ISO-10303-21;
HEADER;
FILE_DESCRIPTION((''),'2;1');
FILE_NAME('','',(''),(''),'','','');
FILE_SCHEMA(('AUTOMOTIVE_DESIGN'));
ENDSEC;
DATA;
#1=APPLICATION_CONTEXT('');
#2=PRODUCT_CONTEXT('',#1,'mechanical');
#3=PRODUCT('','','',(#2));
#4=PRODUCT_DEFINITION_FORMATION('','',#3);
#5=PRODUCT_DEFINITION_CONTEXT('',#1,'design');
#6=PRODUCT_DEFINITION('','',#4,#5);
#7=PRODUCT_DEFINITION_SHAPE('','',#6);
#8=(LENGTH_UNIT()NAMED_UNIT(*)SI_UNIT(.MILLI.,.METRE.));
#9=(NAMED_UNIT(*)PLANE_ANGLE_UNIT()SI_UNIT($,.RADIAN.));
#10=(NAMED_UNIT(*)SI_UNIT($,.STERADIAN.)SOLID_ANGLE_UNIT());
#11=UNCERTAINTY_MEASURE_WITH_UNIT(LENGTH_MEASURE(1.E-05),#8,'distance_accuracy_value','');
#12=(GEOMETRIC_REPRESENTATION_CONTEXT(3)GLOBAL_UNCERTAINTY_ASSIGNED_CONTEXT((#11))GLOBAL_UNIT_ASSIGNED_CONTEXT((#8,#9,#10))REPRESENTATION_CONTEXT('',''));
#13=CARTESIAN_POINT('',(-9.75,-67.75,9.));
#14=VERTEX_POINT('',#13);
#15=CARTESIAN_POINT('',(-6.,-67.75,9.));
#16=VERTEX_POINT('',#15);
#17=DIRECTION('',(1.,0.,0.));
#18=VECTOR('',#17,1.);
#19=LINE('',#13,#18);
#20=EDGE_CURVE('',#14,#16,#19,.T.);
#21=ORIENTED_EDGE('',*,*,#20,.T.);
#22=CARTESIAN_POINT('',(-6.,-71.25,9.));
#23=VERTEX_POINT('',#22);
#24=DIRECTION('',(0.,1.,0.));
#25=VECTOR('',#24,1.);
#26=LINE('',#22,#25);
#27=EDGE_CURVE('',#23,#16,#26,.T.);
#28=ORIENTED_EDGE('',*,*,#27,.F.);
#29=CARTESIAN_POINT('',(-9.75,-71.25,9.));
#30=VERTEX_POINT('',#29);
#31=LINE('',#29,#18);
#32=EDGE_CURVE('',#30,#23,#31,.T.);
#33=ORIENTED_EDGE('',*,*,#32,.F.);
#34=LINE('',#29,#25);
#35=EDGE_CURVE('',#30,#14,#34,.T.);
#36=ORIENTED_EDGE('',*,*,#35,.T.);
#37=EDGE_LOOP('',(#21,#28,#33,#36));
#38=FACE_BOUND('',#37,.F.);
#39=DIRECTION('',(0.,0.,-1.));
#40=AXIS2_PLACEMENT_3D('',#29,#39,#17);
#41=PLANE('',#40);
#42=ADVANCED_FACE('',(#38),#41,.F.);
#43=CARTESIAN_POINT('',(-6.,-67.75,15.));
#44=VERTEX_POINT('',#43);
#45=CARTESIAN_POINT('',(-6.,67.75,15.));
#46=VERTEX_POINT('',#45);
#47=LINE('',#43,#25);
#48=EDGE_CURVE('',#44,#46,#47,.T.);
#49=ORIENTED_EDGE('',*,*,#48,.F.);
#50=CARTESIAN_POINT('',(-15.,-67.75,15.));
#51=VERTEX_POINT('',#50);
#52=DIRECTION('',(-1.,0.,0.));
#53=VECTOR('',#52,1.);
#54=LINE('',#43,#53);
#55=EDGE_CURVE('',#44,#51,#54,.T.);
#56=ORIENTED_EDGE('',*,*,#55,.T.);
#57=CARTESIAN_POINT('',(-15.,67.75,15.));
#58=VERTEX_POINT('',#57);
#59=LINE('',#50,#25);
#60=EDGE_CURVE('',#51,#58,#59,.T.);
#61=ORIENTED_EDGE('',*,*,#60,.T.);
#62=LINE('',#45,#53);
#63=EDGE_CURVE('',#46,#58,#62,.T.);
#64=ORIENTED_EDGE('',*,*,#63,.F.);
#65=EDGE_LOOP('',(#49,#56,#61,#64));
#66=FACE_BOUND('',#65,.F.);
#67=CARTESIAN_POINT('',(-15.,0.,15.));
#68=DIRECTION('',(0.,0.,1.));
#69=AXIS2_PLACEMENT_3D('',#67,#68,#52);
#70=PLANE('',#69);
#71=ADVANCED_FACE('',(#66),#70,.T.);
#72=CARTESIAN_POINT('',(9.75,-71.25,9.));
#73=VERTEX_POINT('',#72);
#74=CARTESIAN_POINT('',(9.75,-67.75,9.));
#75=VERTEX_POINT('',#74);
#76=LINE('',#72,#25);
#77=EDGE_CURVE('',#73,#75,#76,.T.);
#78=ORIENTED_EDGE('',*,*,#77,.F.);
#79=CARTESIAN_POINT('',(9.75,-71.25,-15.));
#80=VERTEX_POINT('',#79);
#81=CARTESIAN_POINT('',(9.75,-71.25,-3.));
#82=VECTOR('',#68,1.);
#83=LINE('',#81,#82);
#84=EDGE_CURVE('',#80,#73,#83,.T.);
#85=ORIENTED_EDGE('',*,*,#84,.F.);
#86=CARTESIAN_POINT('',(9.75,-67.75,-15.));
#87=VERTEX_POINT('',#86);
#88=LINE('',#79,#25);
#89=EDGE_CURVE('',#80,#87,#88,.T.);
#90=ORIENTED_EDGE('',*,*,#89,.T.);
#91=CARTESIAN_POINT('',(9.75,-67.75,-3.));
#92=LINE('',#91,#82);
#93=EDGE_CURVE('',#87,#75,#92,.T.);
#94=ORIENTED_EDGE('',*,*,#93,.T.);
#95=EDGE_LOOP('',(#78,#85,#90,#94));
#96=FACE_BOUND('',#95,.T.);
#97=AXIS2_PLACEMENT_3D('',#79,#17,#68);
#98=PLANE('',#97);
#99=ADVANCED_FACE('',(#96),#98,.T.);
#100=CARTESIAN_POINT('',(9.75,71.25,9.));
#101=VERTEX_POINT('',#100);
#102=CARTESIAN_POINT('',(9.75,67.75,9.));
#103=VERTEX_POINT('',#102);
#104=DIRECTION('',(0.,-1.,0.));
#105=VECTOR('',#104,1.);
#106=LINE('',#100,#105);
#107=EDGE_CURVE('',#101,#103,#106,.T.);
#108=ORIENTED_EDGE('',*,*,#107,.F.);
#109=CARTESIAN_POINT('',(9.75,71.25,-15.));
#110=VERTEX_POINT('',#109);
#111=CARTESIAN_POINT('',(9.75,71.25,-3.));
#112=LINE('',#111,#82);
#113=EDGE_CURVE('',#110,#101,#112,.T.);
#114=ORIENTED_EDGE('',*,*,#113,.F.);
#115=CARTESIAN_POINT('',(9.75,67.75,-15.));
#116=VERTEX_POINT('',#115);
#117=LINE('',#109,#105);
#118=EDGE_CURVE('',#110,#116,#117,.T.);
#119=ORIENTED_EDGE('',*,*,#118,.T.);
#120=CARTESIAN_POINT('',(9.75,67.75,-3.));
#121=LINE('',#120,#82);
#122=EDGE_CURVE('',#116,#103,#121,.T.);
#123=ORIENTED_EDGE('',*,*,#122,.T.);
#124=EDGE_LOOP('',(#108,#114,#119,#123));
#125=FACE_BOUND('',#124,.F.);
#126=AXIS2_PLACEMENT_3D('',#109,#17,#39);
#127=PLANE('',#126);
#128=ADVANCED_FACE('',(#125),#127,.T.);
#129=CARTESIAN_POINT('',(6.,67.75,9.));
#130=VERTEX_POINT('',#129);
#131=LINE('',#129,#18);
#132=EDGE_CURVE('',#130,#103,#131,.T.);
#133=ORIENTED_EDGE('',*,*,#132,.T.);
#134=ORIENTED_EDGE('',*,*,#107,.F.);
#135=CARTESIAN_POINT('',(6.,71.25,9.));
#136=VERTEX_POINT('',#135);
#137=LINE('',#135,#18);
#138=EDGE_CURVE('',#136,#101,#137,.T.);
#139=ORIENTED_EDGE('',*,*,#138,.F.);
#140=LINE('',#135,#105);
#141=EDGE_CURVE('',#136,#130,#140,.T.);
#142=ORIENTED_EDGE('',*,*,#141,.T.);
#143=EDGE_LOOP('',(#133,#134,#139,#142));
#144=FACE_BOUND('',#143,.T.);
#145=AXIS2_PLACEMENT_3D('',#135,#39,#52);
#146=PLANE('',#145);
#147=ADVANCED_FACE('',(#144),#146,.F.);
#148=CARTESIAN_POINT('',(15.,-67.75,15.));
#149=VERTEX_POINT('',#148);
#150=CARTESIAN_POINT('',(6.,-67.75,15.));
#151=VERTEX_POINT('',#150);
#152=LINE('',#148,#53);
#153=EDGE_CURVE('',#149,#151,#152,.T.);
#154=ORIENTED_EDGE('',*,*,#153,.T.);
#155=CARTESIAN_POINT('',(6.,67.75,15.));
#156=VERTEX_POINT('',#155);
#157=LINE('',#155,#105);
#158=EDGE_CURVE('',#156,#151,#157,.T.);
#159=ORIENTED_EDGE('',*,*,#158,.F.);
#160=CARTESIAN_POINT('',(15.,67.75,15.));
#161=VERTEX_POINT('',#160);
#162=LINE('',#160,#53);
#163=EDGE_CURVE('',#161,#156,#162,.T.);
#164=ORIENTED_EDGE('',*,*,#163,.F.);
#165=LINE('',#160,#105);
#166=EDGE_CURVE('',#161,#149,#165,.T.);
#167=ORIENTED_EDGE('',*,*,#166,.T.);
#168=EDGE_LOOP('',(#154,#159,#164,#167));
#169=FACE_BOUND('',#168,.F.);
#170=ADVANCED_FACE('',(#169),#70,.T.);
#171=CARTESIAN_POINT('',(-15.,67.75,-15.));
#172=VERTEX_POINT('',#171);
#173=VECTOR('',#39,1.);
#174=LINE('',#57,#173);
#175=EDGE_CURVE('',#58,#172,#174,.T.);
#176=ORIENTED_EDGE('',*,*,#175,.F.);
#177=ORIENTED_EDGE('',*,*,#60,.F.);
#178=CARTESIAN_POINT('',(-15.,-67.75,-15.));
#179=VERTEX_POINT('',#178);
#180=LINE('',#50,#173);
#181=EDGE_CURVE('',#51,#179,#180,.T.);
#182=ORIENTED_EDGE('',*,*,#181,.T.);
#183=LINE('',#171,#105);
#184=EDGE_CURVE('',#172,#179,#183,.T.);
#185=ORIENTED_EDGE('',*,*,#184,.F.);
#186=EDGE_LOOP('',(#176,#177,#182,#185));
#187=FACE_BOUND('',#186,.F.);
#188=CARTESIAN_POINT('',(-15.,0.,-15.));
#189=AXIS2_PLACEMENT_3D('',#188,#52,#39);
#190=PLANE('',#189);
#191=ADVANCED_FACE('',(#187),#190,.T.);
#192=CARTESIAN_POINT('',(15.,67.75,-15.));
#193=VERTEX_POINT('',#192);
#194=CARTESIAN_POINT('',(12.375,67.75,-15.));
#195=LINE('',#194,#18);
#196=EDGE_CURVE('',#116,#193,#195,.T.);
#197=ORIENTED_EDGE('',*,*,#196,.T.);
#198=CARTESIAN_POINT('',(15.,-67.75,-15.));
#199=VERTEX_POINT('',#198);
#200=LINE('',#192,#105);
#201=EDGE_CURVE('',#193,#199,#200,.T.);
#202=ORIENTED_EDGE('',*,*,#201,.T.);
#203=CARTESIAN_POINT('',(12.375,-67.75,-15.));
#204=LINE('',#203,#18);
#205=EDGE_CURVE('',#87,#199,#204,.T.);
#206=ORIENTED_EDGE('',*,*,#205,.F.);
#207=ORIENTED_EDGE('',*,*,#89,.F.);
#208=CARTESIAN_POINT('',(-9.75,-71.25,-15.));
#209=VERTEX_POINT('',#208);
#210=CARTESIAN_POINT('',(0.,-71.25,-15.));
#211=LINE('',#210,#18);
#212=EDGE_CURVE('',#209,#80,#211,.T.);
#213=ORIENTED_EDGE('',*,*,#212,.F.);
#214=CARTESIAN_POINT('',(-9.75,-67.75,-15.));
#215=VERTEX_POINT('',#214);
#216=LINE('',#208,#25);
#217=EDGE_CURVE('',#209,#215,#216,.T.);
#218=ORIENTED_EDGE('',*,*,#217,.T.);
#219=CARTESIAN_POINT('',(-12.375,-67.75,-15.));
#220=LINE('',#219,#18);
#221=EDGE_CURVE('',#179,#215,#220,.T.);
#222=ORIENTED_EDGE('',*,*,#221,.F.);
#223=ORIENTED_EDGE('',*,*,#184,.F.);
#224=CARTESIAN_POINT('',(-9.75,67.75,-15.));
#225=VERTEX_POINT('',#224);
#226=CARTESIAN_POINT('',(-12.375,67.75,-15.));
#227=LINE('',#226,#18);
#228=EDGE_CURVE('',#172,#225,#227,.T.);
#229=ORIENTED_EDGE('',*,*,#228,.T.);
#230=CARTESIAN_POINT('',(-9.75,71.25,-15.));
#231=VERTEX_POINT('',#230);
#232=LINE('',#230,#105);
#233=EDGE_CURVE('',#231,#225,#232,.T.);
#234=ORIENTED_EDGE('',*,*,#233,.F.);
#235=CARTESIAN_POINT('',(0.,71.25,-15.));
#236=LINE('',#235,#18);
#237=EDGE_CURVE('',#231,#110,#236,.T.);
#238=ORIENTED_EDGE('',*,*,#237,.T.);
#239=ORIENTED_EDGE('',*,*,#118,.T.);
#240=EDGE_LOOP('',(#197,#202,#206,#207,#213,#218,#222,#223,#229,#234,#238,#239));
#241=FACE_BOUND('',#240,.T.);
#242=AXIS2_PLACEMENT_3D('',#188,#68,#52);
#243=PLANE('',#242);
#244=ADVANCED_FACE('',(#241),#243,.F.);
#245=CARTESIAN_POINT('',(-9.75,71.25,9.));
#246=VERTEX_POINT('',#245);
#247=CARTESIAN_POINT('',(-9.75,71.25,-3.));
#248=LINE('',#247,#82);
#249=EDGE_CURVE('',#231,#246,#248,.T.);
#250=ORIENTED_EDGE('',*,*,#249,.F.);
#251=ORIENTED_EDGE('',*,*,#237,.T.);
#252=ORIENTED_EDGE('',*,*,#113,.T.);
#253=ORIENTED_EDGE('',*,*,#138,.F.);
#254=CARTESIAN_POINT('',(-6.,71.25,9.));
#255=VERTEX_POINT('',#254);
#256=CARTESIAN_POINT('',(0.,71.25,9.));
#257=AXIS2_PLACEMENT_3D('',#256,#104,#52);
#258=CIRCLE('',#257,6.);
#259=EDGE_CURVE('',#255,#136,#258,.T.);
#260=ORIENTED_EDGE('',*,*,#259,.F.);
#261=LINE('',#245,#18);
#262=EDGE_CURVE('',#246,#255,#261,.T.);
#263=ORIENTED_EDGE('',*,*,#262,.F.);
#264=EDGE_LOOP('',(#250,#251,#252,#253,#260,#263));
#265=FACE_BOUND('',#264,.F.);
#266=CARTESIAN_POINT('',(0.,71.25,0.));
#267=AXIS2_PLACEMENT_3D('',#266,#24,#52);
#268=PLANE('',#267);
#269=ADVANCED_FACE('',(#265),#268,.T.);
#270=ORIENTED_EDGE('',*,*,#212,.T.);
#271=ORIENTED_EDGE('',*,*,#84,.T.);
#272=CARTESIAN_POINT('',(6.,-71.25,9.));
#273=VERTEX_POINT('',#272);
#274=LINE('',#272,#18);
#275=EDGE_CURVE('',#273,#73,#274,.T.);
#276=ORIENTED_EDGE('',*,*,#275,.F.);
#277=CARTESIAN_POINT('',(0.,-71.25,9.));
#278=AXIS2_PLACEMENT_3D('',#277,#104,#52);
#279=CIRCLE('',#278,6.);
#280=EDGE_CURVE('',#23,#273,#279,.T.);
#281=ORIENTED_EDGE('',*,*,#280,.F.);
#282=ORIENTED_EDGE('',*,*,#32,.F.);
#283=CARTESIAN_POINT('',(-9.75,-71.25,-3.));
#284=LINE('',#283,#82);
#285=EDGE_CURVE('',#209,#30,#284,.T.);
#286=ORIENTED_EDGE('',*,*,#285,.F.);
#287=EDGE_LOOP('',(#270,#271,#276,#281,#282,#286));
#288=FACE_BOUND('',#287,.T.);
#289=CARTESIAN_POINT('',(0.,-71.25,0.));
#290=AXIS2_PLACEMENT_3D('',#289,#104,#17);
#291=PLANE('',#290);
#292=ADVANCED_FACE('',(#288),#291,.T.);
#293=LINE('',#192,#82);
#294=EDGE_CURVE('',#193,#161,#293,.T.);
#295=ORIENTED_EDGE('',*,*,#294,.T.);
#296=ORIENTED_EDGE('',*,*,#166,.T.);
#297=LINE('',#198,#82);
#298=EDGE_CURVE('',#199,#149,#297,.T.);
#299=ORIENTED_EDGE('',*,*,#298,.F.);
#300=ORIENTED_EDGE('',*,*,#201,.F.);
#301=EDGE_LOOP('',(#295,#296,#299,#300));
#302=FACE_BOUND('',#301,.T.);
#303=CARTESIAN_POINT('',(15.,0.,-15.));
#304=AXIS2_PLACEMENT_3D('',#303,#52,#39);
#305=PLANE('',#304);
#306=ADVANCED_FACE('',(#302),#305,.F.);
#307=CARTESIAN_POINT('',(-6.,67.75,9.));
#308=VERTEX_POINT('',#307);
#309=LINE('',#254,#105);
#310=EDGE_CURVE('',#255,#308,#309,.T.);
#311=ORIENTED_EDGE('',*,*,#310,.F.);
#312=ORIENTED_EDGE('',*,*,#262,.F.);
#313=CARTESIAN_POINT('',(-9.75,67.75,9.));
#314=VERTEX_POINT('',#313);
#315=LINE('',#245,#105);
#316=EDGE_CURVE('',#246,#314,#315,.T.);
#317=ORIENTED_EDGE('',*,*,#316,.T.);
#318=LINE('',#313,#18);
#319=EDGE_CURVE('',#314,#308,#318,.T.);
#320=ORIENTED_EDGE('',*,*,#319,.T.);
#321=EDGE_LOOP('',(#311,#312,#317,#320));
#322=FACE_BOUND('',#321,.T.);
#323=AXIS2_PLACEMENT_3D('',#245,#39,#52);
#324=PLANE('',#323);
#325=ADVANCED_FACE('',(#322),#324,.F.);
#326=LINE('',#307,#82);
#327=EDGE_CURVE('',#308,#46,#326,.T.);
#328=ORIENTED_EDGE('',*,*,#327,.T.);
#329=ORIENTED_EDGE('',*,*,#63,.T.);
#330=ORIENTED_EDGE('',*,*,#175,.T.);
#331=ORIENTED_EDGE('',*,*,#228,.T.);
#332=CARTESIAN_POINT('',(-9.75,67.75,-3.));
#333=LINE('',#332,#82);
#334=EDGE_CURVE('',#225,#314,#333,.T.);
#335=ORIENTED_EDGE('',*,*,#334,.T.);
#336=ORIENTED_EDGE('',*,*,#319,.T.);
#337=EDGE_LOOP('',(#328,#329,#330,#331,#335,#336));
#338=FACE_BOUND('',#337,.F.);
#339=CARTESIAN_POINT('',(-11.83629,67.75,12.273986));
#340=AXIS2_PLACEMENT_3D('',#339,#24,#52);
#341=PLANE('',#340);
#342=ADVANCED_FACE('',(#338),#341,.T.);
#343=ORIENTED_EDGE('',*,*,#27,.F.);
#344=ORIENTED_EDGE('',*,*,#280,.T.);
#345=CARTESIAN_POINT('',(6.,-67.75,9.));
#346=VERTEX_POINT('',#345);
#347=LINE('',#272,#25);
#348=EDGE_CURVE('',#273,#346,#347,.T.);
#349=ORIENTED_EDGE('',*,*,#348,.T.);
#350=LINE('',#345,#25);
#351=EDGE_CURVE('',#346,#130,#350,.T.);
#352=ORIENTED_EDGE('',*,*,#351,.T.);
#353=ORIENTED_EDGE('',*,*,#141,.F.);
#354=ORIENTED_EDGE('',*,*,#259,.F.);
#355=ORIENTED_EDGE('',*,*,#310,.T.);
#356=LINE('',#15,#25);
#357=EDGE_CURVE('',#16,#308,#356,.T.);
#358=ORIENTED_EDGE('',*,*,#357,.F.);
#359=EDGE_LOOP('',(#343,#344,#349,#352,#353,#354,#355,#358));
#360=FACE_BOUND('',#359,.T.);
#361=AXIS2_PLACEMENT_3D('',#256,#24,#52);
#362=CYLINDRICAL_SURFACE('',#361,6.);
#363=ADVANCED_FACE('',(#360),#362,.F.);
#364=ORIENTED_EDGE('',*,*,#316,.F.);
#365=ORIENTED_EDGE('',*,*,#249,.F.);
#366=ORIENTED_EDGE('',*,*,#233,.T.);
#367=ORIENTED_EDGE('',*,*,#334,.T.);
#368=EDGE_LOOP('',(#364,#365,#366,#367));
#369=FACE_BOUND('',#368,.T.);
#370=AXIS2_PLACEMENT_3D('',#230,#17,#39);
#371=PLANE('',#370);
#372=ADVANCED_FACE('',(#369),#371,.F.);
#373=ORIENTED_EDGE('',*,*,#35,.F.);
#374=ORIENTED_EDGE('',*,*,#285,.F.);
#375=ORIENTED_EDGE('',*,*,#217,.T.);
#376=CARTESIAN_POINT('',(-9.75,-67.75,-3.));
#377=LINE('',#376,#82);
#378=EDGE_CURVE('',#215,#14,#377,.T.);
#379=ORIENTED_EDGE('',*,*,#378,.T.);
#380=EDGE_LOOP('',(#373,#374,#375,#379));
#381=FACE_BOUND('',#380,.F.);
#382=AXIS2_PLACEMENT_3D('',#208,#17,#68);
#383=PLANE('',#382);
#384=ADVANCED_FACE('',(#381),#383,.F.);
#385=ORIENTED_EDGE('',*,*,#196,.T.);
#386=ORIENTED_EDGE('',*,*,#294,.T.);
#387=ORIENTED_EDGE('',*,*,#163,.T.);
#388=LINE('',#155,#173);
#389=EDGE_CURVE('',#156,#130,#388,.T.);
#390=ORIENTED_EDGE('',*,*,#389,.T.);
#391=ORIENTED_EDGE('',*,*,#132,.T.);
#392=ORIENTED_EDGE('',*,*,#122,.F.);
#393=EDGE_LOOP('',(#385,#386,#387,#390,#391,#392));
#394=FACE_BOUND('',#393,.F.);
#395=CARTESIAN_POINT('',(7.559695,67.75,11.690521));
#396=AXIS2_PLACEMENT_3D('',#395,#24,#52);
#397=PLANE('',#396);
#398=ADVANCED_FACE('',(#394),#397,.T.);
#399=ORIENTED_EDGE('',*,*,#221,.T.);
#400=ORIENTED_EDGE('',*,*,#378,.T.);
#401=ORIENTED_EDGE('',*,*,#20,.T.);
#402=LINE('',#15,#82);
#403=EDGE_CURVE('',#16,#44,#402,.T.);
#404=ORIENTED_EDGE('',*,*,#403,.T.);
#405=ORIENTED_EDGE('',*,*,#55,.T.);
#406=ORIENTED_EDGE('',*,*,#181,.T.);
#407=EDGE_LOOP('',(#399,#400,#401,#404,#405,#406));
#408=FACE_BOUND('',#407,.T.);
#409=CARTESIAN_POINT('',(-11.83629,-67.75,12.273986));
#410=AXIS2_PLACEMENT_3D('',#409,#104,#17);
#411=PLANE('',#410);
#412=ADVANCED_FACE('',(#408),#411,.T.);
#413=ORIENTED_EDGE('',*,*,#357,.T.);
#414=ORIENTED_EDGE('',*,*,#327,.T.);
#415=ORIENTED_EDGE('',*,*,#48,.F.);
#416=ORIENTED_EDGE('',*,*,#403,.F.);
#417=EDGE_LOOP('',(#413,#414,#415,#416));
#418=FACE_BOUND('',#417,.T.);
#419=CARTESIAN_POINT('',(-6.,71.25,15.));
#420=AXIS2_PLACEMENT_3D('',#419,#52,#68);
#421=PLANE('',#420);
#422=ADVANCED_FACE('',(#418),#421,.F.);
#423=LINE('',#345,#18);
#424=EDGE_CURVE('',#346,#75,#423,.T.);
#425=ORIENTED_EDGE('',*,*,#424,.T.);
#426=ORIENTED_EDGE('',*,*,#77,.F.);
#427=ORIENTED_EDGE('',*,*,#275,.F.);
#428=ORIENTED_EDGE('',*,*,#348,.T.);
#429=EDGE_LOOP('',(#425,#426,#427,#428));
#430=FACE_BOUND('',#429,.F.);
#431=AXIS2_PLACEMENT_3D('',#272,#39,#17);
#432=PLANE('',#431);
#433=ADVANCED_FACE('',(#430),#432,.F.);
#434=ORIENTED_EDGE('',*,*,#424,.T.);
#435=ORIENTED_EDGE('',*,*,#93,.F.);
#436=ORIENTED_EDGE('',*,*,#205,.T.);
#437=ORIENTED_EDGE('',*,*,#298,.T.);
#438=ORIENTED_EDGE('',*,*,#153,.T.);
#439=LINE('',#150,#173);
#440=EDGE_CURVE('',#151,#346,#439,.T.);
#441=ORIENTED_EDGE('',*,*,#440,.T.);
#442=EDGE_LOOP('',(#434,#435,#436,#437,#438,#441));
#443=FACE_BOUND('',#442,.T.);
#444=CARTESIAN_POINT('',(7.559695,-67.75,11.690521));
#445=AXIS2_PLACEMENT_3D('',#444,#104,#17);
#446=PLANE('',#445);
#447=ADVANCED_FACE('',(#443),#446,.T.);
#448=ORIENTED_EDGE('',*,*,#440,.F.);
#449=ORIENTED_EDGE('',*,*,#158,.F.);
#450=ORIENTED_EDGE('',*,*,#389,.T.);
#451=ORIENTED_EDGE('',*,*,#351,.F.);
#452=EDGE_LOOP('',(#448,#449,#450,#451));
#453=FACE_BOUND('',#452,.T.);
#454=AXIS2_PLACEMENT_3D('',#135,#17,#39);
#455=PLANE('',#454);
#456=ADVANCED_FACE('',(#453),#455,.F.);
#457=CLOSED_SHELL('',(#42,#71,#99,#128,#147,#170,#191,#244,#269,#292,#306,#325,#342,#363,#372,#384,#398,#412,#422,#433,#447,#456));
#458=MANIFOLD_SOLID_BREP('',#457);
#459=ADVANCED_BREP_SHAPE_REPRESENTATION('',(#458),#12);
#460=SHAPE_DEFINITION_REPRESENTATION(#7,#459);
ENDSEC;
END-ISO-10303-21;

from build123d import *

# Parameters (mm, degrees)
F0_W     = 30
F0_H     = 30
F1_DEPTH = 71.25
F3_DEPTH = 71.251
F4_W     = 5.25
F4_H     = 24
F5_DEPTH = 3.5


# Not quite as in the source:
# - a feature names something its author has since deleted; it is built from what else it names


with BuildPart() as f1:
    # F0 (on Front) → F1 (new body)
    with BuildSketch(Plane.XZ):
        Rectangle(F0_W, F0_H)
    extrude(amount=F1_DEPTH)

    # F2 (on face) → F3 (cut, through all)
    with BuildSketch(Plane.XZ.offset(71.25)):
        with BuildLine():
            Line((6, 9), (6, 15))
            Line((6, 15), (-6, 15))
            Line((-6, 15), (-6, 9))
            ThreePointArc((-6, 9), (0, 3), (6, 9))
        make_face()
    extrude(amount=-F3_DEPTH, mode=Mode.SUBTRACT)

    # F4 (on face) → F5 (cut)
    with BuildSketch(Plane.XZ.offset(71.25)):
        with BuildLine():
            ThreePointArc((-9.75, 9), (-9.2193635213, 12.1726702101), (-7.6852130745, 15))
            Line((-7.6852130745, 15), (-15, 15))
            Line((-15, 15), (-15, 9))
            Line((-15, 9), (-9.75, 9))
        make_face()
        with BuildLine():
            Line((6, 9), (9.75, 9))
            ThreePointArc((9.75, 9), (9.2193635213, 12.1726702101), (7.6852130745, 15))
            Line((7.6852130745, 15), (6, 15))
            Line((6, 15), (6, 9))
        make_face()
        with BuildLine():
            ThreePointArc((7.6852130745, 15), (9.2193635213, 12.1726702101), (9.75, 9))
            Line((9.75, 9), (15, 9))
            Line((15, 9), (15, 15))
            Line((15, 15), (7.6852130745, 15))
        make_face()
        with Locations((-12.375, -3)):
            Rectangle(F4_W, F4_H)
        with Locations((12.375, -3)):
            Rectangle(F4_W, F4_H)
        with BuildLine():
            Line((-6, 15), (-7.6852130745, 15))
            ThreePointArc((-7.6852130745, 15), (-9.2193635213, 12.1726702101), (-9.75, 9))
            Line((-9.75, 9), (-6, 9))
            Line((-6, 9), (-6, 15))
        make_face()
    extrude(amount=-F5_DEPTH, mode=Mode.SUBTRACT)

    # F6: F1 across plane


with BuildPart() as f1_1:
    add(f1.part)
    add(f1.part.mirror(Plane.XZ))


solid = f1_1.part
